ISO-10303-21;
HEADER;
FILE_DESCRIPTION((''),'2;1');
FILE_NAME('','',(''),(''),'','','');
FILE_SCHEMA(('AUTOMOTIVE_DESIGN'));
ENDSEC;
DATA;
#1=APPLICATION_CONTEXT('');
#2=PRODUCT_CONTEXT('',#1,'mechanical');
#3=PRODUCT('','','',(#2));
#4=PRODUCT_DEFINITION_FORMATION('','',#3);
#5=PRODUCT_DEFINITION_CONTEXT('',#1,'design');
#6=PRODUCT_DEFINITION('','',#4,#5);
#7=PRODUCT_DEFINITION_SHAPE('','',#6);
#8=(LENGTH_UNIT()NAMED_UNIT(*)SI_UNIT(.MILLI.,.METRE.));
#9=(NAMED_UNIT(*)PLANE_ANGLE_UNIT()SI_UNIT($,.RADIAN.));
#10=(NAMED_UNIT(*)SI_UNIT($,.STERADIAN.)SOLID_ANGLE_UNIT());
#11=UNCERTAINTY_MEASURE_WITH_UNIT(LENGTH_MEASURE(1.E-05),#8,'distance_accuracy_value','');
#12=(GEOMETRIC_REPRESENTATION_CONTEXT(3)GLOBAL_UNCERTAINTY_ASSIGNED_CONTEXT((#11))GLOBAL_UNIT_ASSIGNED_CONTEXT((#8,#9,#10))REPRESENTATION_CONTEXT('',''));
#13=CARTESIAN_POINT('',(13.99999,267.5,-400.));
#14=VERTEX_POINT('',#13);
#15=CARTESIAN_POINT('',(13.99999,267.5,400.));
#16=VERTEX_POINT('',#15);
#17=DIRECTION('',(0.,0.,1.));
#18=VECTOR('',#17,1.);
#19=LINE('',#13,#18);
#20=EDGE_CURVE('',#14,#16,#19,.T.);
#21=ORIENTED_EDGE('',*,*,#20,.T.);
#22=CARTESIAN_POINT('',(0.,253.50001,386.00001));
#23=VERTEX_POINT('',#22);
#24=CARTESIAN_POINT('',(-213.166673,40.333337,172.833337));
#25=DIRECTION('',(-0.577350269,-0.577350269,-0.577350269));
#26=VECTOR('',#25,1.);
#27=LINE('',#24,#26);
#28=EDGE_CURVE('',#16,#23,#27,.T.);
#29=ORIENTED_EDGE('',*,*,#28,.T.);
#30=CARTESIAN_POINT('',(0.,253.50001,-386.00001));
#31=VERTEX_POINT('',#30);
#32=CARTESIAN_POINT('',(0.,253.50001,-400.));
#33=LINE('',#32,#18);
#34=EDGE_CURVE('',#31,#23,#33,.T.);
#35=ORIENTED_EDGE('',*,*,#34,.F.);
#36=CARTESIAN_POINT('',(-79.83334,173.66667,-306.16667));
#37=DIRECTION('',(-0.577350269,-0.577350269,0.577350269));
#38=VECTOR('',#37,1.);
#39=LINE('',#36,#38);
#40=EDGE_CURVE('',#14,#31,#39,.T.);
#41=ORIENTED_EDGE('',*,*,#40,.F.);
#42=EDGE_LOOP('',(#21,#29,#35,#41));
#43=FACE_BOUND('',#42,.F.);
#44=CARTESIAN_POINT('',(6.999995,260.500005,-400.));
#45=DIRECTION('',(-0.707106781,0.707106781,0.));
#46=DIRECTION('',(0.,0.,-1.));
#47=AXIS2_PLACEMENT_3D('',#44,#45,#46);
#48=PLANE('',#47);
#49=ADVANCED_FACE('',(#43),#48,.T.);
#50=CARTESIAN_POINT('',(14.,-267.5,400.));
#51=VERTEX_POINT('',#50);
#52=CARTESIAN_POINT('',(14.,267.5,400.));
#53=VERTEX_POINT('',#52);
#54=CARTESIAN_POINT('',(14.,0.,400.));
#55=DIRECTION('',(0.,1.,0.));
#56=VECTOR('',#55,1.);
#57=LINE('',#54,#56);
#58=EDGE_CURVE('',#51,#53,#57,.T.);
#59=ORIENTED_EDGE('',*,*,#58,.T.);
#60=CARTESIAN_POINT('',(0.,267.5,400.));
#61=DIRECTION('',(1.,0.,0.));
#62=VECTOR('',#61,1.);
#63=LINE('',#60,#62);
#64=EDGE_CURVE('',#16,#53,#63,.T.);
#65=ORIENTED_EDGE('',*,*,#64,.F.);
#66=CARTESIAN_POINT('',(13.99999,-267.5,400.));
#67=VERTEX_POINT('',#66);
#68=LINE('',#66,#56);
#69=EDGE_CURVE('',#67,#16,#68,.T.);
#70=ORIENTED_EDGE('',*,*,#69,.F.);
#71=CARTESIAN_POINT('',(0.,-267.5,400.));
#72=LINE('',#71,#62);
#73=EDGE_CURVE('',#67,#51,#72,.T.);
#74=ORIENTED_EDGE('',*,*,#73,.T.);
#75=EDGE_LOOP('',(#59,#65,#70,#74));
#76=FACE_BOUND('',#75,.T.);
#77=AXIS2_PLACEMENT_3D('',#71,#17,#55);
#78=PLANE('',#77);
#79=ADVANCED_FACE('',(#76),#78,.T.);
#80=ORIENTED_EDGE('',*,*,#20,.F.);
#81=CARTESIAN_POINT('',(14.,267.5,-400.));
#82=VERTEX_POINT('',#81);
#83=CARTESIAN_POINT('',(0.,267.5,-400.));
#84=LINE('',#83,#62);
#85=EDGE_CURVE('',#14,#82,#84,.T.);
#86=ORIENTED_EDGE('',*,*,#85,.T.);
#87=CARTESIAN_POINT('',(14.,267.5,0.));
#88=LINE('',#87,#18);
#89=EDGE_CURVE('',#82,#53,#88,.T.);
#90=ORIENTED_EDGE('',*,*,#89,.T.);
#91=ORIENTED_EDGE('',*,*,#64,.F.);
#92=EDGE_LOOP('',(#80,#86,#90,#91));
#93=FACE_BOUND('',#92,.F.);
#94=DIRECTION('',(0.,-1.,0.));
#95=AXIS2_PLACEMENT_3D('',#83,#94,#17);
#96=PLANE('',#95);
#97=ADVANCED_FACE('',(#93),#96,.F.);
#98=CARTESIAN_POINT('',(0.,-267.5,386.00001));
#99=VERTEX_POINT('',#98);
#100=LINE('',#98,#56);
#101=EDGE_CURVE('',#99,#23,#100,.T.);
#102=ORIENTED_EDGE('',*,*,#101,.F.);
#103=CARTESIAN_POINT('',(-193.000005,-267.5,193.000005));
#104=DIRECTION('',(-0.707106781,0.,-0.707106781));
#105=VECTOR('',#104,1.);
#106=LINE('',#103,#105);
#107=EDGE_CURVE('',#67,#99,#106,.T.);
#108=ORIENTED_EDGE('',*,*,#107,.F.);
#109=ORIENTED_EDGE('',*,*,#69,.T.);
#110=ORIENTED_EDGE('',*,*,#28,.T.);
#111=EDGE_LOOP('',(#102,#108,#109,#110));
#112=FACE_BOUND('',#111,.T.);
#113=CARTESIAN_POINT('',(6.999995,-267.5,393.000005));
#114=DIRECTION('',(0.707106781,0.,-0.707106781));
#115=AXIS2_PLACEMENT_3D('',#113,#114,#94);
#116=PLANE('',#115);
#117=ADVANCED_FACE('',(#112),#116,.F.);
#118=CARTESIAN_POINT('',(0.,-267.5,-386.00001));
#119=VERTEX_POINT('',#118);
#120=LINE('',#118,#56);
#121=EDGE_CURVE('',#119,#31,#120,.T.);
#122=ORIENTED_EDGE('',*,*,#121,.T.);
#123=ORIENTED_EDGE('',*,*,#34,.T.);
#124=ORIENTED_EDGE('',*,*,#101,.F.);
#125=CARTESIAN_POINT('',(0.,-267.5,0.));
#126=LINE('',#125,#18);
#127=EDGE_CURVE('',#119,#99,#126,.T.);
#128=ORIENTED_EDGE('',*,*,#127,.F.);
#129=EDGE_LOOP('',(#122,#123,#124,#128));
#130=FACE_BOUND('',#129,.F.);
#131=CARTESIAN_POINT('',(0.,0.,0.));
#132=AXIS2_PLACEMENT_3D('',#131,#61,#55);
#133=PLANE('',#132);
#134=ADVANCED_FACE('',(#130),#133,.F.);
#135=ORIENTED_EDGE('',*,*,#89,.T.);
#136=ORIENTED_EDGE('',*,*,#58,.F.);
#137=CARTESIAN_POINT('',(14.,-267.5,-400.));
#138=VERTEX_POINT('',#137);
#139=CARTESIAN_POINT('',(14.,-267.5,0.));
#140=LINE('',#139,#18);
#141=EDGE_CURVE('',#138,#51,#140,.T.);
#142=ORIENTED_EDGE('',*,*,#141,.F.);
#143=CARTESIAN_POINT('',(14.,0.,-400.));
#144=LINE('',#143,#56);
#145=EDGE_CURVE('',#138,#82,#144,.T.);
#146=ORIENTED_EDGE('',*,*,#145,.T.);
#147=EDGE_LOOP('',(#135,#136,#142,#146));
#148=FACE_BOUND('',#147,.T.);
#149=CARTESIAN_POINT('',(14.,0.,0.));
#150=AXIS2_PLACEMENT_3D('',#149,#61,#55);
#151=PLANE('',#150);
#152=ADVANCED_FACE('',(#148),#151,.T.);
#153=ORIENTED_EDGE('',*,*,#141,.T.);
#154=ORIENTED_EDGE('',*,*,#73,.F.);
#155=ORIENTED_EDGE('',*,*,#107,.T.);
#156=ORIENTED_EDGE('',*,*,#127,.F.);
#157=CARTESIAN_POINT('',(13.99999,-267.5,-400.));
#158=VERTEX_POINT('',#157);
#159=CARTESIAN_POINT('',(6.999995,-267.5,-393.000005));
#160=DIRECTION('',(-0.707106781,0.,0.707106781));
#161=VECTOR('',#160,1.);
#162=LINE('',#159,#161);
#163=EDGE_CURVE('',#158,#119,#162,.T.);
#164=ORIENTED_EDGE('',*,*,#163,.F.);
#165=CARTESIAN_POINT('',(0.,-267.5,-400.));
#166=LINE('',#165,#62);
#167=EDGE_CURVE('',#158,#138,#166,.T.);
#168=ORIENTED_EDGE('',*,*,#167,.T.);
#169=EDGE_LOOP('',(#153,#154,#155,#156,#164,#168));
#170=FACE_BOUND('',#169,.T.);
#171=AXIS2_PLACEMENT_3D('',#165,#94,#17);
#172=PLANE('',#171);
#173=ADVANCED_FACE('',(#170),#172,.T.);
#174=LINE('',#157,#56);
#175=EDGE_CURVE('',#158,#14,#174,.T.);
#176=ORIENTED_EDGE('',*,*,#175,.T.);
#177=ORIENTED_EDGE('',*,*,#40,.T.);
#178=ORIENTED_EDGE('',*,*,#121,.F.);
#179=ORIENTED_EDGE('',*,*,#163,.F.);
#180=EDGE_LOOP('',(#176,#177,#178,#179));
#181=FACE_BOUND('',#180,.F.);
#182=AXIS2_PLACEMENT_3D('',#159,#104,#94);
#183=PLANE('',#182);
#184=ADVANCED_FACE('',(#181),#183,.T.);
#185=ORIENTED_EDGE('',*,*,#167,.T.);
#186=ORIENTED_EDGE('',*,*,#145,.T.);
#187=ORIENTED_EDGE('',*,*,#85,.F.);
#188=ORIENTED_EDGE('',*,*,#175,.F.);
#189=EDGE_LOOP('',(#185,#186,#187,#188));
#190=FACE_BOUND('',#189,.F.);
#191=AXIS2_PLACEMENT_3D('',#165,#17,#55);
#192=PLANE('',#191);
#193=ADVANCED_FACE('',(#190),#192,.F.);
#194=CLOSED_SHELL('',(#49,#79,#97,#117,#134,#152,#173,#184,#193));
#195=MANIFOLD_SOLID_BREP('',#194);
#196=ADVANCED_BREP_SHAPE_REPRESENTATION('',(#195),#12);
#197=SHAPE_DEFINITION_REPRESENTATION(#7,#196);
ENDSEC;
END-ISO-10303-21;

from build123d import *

# Parameters (mm, degrees)
F0_W     = 535
F0_H     = 800
F1_DEPTH = 14
F2_SIZE  = 13.99999


# Not quite as in the source:
# - a fillet or chamfer is up to 0.001 mm smaller than in the source, because OpenCascade refuses the exact size


with BuildPart() as f1:
    # F0 (on Right) → F1 (new body)
    with BuildSketch(Plane.YZ):
        Rectangle(F0_W, F0_H)
    extrude(amount=F1_DEPTH)

    # F2 (size 14 in the source; OpenCascade refuses exactly that, so slightly less here)
    f2_edges = [f1.edges().sort_by_distance(p)[0] for p in [
        (0, 0, 400),
        (0, 267.5, 0),
        (0, 0, -400),
    ]]
    chamfer(f2_edges, length=F2_SIZE)


solid = f1.part
